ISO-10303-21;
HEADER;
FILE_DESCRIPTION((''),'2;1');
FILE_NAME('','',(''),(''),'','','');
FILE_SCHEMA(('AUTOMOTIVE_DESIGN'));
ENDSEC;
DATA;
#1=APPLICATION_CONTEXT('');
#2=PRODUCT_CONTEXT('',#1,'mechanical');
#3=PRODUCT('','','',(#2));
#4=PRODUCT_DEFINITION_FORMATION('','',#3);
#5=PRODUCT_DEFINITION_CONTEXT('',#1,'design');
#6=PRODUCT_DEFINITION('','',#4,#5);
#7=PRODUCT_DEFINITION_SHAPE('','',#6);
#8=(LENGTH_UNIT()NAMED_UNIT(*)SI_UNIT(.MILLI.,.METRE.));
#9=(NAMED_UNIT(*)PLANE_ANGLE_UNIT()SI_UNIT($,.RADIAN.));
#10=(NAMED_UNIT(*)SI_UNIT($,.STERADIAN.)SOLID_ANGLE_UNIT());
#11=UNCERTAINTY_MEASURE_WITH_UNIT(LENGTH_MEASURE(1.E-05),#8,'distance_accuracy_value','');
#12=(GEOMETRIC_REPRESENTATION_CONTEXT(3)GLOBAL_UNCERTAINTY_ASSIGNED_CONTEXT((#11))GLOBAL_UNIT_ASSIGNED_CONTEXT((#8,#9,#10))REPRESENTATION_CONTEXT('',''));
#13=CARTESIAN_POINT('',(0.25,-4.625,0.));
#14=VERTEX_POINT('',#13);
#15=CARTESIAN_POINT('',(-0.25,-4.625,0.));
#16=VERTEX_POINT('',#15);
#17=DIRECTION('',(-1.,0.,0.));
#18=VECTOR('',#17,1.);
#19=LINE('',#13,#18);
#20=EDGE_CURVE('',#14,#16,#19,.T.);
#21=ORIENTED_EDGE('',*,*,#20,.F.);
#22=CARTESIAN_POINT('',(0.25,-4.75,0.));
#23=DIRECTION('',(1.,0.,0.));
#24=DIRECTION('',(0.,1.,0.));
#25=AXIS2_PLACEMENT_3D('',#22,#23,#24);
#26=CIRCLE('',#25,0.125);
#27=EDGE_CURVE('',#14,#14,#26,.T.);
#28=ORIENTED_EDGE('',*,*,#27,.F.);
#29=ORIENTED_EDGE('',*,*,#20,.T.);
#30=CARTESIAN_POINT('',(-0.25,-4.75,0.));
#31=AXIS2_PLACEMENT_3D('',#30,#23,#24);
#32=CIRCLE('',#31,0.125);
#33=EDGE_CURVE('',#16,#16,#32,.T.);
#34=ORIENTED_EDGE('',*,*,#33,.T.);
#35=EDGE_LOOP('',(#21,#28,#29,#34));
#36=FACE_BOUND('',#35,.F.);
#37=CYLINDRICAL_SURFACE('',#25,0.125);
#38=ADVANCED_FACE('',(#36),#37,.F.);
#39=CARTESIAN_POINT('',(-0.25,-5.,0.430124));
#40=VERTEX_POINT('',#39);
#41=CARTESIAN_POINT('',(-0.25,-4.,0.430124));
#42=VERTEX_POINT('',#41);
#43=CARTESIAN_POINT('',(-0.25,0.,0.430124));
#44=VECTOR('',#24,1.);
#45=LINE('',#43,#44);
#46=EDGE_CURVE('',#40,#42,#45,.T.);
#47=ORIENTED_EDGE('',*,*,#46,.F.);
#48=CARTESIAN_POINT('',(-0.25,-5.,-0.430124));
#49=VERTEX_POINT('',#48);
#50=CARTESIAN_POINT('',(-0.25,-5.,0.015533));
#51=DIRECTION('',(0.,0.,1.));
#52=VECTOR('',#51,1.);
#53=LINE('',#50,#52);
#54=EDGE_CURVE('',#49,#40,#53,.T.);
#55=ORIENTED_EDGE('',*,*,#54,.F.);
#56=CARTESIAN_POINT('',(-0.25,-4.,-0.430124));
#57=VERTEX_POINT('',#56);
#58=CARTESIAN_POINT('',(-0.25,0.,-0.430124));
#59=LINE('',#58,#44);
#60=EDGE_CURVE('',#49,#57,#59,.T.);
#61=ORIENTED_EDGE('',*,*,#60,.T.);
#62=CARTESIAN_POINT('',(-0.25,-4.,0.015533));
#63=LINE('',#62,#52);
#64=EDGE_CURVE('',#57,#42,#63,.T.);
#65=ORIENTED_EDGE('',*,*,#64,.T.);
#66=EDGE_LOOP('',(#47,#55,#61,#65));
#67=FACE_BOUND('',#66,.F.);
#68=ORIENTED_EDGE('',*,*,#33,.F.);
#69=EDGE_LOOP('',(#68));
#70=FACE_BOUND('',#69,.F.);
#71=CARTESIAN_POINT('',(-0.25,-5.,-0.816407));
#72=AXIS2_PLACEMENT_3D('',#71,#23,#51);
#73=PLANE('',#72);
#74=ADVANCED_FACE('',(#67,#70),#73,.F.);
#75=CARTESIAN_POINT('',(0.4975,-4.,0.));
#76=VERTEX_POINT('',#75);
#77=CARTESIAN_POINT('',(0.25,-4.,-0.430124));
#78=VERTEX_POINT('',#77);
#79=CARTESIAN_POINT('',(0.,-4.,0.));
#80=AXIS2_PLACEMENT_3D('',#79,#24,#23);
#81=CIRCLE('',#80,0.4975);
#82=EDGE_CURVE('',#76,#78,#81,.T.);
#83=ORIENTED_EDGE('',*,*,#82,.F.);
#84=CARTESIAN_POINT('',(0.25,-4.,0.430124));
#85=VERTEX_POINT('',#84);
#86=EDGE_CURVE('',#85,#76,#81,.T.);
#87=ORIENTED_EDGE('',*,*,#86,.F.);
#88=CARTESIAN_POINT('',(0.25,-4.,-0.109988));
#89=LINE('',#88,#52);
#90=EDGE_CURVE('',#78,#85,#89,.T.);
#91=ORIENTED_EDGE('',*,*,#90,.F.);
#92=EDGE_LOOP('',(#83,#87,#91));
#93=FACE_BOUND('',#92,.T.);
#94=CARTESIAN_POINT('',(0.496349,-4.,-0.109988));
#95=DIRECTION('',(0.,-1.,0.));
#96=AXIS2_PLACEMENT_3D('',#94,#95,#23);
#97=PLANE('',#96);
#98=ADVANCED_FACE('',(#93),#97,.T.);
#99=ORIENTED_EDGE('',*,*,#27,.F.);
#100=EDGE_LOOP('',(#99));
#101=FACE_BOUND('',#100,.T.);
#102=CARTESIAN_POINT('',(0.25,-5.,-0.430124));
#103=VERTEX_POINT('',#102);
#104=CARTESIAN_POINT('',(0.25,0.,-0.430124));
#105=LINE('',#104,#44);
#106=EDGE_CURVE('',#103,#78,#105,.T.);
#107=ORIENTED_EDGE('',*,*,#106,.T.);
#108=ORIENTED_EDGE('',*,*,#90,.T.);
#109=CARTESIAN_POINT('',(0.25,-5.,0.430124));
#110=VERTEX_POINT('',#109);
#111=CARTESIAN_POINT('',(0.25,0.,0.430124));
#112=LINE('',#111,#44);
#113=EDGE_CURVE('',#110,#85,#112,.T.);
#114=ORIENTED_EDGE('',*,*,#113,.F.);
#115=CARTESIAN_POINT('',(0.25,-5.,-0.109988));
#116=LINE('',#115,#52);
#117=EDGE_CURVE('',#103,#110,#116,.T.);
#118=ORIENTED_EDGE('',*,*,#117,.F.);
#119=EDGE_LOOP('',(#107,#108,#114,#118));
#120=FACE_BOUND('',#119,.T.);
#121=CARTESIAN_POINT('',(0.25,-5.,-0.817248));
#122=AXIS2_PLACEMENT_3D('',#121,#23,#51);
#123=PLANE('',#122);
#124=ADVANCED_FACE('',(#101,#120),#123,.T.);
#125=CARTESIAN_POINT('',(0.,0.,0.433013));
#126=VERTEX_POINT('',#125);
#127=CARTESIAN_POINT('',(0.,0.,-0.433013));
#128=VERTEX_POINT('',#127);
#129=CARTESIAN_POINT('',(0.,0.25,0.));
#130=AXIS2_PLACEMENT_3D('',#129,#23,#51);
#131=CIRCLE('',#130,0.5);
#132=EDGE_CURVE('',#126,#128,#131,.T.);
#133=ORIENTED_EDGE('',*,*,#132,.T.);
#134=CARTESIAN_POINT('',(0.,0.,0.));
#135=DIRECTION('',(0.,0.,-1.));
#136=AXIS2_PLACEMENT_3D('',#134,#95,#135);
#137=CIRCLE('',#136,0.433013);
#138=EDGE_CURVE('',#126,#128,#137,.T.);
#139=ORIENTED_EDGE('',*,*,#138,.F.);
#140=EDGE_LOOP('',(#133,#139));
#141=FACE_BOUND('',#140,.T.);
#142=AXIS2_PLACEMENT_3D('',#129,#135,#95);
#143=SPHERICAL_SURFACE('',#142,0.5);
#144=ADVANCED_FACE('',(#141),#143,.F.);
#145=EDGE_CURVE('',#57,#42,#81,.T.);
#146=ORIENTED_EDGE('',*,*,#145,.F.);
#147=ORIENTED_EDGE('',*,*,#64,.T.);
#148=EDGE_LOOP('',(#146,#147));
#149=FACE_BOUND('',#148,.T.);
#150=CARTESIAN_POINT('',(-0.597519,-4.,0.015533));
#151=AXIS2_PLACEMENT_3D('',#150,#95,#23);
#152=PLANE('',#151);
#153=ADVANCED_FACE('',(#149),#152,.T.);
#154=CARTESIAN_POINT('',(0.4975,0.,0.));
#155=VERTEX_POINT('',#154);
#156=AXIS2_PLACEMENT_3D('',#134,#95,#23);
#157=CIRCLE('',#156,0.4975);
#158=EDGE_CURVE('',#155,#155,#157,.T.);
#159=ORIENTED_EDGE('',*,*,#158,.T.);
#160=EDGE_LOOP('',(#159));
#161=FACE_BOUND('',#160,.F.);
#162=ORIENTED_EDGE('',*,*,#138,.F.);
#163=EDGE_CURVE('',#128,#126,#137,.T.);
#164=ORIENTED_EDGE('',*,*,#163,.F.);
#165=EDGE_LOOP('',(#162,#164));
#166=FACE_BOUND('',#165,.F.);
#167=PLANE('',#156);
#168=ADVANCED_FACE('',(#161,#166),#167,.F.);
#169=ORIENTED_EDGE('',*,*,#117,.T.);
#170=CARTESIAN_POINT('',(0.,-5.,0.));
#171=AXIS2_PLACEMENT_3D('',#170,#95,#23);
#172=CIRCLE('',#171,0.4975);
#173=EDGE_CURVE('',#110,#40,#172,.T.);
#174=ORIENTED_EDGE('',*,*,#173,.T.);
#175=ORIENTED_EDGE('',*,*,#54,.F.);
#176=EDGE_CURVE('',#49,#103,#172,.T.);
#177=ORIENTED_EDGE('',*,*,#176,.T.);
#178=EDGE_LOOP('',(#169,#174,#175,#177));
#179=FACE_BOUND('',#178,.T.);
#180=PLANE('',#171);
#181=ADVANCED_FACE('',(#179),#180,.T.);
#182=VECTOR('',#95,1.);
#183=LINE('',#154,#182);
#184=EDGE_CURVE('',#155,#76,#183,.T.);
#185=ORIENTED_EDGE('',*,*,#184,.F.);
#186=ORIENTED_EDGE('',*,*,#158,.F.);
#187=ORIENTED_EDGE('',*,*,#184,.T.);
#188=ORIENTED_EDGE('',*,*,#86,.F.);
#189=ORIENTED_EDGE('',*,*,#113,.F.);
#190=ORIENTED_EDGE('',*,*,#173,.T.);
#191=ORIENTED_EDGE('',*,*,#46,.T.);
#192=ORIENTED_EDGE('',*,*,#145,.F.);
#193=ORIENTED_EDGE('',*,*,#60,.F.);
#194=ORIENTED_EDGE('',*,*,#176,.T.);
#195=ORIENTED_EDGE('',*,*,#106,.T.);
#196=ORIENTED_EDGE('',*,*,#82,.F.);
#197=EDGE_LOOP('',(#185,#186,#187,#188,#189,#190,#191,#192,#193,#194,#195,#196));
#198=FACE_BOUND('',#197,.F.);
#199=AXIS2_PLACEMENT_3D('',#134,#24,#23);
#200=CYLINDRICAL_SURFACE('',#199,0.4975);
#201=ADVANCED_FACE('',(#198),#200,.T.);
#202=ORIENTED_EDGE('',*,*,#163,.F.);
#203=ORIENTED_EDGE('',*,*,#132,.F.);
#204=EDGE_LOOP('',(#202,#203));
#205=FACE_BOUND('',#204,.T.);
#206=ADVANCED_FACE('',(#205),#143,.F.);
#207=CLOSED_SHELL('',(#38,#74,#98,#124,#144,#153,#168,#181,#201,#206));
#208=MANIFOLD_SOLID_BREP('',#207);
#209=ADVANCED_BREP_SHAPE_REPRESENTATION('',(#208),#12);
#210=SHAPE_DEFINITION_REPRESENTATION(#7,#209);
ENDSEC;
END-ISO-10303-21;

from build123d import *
from build123d import SkipClean  # not in build123d's __all__

# Parameters (mm, degrees)
F0_R     = 0.4975
F1_DEPTH = 5
F2_W     = 0.6950388919
F2_H     = 1.663880872
F3_DEPTH = 1
F4_W     = 0.4926979624
F4_H     = 1.4145199916
F5_DEPTH = 1
F6_R     = 0.125
F7_DEPTH = 25


with BuildPart() as f1:
    # F0 (on Front) → F1 (new body)
    with BuildSketch(Plane.XZ):
        Circle(F0_R)
    extrude(amount=F1_DEPTH)

    # F2 (on face) → F3 (cut)
    with BuildSketch(Plane.XZ.offset(5)):
        with Locations((-0.5975194459, 0.0155332382)):
            Rectangle(F2_W, F2_H)
    extrude(amount=-F3_DEPTH, mode=Mode.SUBTRACT)

    # F4 (on face) → F5 (cut)
    with BuildSketch(Plane.XZ.offset(5)):
        with Locations((0.4963489812, -0.1099880319)):
            Rectangle(F4_W, F4_H)
    extrude(amount=-F5_DEPTH, mode=Mode.SUBTRACT)

    # F6 (on face) → F7 (cut)
    with BuildSketch(Plane.YZ.offset(0.25)):
        with Locations((-4.75, 0)):
            Circle(F6_R)
    extrude(amount=-F7_DEPTH, mode=Mode.SUBTRACT)

    # F8 (on Right) → F9 (revolve, cut)
    with BuildSketch(Plane.YZ):
        with BuildLine():
            Line((0.25, -0.5), (0.25, 0.5))
            ThreePointArc((0.25, 0.5), (-0.25, 0), (0.25, -0.5))
        make_face()
    with SkipClean():  # cleaning this boolean's faces spoils the solid; the shape is the same uncleaned
        revolve(axis=Axis((0, 0.25, 0), (0, 0, 1)), mode=Mode.SUBTRACT)


solid = f1.part
